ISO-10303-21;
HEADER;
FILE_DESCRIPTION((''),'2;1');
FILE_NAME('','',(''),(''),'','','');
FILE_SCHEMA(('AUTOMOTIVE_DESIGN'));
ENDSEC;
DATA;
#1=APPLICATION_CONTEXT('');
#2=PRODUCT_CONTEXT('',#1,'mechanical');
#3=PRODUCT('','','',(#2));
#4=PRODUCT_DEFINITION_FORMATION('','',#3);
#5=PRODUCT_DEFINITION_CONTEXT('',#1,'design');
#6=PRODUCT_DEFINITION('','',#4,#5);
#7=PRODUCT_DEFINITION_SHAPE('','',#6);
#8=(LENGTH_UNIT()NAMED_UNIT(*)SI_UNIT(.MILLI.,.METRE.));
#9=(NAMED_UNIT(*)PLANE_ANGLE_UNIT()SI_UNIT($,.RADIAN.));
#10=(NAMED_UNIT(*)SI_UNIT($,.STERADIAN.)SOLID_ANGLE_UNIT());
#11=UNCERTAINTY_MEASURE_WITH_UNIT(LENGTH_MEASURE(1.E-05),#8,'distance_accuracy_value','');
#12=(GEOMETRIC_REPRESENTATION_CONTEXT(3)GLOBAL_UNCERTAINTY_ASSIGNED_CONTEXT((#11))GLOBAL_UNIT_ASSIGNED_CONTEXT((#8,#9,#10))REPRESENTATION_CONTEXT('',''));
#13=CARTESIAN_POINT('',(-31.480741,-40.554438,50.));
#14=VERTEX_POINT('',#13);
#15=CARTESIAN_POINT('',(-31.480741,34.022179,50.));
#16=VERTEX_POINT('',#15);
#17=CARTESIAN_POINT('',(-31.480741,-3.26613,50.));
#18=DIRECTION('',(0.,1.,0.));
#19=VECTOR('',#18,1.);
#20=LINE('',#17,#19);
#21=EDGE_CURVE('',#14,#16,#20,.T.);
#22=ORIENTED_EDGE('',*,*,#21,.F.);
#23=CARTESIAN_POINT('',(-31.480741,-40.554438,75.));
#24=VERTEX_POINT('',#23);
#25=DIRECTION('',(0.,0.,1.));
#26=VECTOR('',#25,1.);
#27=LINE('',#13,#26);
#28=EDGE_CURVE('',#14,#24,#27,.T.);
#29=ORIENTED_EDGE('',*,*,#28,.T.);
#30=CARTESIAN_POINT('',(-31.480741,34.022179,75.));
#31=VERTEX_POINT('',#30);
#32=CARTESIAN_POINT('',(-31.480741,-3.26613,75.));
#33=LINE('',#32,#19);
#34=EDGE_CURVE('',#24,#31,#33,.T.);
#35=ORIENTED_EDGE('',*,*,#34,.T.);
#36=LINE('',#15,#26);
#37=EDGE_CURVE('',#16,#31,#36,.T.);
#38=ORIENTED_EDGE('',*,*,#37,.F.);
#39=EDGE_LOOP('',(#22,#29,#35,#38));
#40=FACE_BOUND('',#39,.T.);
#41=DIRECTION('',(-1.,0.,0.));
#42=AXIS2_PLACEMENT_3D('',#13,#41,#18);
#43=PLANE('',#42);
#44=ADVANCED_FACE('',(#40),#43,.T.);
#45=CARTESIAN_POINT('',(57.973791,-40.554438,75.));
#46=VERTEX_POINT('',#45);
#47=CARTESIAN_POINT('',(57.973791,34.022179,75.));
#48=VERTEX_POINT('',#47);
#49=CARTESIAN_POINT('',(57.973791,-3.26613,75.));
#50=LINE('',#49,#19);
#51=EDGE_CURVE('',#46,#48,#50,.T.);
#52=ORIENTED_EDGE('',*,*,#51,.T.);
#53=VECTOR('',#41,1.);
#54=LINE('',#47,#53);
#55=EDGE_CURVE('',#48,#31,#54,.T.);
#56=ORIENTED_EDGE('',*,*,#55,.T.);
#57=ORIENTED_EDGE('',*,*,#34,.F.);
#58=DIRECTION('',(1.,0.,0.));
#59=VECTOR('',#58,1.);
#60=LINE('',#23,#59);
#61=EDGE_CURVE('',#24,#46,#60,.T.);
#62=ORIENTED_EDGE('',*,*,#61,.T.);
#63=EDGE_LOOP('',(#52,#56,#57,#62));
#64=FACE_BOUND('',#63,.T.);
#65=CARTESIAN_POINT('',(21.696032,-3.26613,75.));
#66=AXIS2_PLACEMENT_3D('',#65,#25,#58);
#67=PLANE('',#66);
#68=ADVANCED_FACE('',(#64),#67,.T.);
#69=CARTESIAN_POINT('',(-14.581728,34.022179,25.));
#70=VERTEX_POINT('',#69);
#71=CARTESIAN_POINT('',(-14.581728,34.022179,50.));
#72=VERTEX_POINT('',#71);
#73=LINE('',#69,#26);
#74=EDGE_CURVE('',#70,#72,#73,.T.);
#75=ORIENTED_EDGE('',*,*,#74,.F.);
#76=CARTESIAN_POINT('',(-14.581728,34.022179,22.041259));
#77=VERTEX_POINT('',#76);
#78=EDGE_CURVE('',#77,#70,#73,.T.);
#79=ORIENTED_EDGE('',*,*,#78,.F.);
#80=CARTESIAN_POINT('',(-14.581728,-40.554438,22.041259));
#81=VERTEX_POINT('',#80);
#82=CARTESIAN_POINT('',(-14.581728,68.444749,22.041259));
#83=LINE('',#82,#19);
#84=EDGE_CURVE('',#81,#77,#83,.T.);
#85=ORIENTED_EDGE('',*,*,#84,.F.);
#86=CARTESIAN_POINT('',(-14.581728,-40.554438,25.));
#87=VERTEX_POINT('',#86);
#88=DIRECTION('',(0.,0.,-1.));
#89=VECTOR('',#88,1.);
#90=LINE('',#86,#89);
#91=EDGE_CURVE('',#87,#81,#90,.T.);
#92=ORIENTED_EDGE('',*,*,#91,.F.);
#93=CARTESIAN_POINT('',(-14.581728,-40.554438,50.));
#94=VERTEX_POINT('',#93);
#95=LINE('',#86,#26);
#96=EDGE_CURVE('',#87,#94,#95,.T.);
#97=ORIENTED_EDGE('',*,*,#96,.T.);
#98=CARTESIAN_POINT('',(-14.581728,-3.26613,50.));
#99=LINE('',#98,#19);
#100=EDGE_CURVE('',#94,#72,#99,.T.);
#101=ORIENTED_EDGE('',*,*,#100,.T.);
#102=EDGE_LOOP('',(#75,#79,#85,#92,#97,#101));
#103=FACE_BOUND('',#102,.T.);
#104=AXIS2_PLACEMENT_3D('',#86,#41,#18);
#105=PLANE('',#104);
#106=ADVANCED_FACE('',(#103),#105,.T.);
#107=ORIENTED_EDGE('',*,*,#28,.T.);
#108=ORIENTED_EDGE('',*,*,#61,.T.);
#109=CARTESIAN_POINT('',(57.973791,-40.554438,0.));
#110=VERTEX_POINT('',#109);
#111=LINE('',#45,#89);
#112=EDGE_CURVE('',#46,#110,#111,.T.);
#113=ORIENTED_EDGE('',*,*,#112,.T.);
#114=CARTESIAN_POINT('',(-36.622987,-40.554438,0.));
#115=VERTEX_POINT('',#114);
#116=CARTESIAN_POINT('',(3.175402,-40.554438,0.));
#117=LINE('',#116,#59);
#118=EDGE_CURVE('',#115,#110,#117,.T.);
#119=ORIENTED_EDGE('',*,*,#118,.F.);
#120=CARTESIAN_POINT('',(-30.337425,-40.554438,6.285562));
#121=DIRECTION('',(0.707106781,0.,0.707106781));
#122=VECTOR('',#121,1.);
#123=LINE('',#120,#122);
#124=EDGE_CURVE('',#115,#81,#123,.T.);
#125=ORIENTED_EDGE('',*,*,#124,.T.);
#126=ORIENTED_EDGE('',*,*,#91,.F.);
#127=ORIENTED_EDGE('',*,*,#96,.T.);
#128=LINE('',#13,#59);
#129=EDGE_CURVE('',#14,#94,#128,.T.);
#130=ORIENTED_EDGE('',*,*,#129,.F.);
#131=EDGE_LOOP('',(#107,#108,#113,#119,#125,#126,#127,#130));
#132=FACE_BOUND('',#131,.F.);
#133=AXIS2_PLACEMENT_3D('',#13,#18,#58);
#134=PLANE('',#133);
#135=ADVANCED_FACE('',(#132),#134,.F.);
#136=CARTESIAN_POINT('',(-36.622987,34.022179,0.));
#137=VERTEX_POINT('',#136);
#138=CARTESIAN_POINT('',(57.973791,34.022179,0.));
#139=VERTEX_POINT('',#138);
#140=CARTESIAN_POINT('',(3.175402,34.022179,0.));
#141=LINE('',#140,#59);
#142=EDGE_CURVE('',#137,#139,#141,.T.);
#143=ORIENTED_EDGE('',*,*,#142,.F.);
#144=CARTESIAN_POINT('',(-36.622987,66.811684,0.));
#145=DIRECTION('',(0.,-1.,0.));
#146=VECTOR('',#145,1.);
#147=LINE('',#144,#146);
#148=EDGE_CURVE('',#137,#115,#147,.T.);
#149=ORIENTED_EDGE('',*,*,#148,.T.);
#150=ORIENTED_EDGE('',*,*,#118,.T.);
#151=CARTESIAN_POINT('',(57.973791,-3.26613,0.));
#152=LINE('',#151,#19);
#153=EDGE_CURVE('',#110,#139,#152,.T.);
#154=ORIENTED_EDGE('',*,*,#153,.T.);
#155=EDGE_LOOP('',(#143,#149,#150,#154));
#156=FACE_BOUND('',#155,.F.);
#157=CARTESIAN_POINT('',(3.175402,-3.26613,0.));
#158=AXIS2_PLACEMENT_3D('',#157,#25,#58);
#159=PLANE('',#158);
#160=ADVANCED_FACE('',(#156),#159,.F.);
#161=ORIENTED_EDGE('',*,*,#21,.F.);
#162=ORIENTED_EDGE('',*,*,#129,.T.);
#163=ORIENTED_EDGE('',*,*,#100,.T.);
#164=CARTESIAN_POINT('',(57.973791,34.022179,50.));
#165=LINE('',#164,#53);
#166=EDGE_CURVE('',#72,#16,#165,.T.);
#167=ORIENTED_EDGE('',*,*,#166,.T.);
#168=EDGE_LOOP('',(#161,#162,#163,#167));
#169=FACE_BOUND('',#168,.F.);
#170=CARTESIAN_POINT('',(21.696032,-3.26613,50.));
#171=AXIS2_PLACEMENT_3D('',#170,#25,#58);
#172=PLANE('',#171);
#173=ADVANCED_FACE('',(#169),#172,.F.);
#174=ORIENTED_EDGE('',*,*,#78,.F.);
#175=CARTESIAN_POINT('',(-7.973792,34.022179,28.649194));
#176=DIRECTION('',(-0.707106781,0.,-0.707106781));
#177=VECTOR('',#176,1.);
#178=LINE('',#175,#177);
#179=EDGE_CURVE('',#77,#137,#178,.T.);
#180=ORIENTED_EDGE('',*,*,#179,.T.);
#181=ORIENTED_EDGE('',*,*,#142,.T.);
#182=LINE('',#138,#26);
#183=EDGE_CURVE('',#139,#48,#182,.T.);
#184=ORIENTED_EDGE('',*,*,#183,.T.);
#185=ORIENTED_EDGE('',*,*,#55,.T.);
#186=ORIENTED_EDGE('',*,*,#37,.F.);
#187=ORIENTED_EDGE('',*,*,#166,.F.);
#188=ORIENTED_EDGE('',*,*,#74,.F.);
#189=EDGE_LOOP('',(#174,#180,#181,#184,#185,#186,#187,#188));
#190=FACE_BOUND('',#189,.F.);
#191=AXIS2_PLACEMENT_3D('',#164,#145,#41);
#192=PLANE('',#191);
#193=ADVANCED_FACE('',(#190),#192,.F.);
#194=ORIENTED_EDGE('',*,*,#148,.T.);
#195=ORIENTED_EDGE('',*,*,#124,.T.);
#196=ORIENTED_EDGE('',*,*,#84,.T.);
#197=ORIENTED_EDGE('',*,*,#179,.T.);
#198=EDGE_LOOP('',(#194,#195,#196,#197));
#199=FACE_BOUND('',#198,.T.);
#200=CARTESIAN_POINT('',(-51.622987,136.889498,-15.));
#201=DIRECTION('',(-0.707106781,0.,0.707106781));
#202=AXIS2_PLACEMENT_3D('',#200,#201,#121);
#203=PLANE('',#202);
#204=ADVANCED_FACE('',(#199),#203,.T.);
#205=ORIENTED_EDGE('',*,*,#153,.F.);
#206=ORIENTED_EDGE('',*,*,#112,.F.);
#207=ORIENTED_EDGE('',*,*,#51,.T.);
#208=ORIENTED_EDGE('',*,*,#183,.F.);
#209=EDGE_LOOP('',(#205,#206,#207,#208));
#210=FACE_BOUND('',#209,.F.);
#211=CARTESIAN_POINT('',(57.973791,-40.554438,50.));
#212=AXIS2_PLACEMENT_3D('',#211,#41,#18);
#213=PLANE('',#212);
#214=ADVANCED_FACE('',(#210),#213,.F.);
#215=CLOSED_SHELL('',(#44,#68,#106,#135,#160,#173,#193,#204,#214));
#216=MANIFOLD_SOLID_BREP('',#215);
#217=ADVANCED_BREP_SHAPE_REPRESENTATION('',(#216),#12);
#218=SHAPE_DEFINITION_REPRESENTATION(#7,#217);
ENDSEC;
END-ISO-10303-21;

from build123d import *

# Parameters (mm, degrees)
F0_W        = 109.5967777073
F0_H        = 74.5766162872
F1_DEPTH    = 25
F2_W        = 72.5555187091
F2_H        = 74.5766162872
F3_DEPTH    = 25
F4_W        = 72.5555187091
F4_H        = 74.5766162872
F4_W_2      = 16.8990129605
F5_DEPTH    = 25
F6_T4_DEPTH = 280.3112553245


# Not quite as in the source:
# - a fillet or chamfer that OpenCascade refuses, or shapes differently, is made with other operations: its cross-section is extruded or revolved along the edge and cut away or added


with BuildPart() as f1:
    # F0 (on Top) → F1 (new body)
    with BuildSketch(Plane.XY):
        with Locations((3.1754020602, -3.2661296427)):
            Rectangle(F0_W, F0_H)
    extrude(amount=F1_DEPTH)

    # F2 (on face) → F3 (join)
    with BuildSketch(Plane.XY.offset(25)):
        with Locations((21.6960315593, -3.2661296427)):
            Rectangle(F2_W, F2_H)
    extrude(amount=F3_DEPTH)

    # F4 (on face) → F5 (join)
    with BuildSketch(Plane.XY.offset(50)):
        with Locations((21.6960315593, -3.2661296427)):
            Rectangle(F4_W, F4_H)
        with Locations((-23.0312342755, -3.2661296427)):
            Rectangle(F4_W_2, F4_H)
    extrude(amount=F5_DEPTH)

    # F6: chamfer of 40 on 1 edges, made by hand


with BuildPart() as f6_tool2:
    # F6_s3 → F6_t4 (new body)
    with BuildSketch(Plane.XZ.offset(-136.8894980195)):
        Polygon((-51.6229867935, -15), (-11.6229867935, 25), (-51.6229867935, 25), align=None)
    extrude(amount=F6_T4_DEPTH)

    split(bisect_by=Plane.YZ.offset(-14.5817277953), keep=Keep.BOTTOM)


with BuildPart() as f1_1:
    add(f1.part)

    # F6_t1: cut F6_tool2
    add(f6_tool2.part, mode=Mode.SUBTRACT)


solid = f1_1.part
